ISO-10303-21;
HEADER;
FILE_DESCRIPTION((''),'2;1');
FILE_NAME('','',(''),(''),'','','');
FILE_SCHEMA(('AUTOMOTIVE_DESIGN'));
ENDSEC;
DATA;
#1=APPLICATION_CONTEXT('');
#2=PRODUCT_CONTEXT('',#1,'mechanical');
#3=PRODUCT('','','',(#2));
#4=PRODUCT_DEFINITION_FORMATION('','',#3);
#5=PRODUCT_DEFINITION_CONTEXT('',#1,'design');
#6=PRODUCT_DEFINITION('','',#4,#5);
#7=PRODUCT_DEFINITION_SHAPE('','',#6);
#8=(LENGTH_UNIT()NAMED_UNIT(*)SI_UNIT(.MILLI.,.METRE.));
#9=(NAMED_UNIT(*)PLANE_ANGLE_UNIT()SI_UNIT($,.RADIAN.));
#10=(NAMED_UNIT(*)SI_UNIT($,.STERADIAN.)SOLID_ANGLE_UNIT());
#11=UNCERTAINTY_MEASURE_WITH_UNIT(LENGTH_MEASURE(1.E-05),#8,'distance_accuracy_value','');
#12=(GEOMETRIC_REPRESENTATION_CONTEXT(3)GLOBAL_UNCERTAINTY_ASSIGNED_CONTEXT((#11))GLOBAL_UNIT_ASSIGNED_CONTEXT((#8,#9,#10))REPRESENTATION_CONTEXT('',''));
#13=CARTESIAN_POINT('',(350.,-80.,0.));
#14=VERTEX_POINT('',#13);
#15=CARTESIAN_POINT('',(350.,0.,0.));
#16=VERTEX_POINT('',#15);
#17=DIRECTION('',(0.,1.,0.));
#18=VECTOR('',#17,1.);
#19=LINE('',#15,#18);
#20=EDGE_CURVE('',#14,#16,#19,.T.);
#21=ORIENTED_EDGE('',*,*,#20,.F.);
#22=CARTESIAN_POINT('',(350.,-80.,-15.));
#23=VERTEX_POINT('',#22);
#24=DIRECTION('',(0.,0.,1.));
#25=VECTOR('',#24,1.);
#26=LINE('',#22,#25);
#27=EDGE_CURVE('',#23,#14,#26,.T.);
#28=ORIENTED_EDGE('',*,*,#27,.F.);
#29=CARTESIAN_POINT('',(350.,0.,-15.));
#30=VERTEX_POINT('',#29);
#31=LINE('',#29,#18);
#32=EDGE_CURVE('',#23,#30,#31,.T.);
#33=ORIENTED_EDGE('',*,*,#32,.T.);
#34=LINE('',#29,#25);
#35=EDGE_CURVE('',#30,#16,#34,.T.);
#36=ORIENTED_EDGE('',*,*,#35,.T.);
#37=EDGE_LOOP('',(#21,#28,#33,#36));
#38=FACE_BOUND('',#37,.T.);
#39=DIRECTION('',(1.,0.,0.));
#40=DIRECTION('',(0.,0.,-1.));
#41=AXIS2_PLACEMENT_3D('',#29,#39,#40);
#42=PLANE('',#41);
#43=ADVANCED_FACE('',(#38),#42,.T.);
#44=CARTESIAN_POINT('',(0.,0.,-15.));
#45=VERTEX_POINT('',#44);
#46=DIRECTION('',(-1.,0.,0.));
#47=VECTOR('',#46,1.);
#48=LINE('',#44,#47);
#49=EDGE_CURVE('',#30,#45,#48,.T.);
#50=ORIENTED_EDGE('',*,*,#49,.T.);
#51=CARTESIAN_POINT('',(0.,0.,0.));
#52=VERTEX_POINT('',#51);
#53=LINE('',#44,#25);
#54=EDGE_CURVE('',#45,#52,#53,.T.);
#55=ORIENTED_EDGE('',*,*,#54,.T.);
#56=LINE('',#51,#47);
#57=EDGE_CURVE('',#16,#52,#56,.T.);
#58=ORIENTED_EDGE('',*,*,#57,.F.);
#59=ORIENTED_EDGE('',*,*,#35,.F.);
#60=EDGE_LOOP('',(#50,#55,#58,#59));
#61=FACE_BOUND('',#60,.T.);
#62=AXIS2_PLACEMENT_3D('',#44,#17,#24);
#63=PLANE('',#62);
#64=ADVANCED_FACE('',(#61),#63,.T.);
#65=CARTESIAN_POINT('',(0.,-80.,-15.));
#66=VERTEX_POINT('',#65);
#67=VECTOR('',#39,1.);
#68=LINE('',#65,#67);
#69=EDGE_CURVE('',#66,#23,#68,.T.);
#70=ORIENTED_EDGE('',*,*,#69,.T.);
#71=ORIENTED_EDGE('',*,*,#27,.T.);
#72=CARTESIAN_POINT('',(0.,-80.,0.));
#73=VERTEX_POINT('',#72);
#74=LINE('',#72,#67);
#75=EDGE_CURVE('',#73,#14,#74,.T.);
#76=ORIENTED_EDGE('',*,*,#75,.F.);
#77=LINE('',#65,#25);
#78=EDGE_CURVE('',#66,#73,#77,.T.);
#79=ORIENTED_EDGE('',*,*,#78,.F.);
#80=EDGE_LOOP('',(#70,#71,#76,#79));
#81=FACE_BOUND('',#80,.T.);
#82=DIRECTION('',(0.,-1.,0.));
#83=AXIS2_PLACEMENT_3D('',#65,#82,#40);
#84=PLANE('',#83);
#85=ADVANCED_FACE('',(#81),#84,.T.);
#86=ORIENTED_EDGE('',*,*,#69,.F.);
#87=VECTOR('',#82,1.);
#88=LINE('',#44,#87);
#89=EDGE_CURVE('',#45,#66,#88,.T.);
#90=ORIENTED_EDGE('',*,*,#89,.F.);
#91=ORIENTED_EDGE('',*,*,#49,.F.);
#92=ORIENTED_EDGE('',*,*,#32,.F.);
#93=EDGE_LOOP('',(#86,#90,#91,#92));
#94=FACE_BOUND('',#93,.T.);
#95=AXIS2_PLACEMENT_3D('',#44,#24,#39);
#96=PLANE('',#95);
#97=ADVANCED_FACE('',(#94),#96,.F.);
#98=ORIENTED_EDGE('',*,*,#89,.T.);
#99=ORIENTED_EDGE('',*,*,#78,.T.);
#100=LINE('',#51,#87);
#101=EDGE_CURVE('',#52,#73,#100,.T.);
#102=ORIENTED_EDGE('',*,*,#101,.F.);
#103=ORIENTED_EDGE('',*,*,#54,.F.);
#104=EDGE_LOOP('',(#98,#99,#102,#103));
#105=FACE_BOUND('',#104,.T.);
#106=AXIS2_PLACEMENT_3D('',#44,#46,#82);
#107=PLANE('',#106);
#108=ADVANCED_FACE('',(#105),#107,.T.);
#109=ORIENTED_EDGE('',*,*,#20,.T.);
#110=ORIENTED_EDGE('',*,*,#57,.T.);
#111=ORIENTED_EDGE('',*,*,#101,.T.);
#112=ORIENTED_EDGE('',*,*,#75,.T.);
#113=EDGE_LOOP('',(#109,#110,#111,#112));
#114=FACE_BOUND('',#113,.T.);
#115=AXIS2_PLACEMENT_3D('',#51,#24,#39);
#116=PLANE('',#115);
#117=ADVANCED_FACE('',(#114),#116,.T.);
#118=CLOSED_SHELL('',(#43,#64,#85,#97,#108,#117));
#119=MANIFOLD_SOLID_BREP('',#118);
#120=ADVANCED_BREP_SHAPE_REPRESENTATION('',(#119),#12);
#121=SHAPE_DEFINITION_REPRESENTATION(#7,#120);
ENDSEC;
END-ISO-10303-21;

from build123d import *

# Parameters (mm, degrees)
IZIM1_W            = 350
IZIM1_H            = 80
TABAN_FLAN_1_DEPTH = 15


# Sheet-metal steps are written as plain solids
with BuildPart() as part:
    # Çizim1 → Taban-Flanş1 (new body)
    with BuildSketch(Plane.XY):
        with Locations((175, -40)):
            Rectangle(IZIM1_W, IZIM1_H)
    extrude(amount=-TABAN_FLAN_1_DEPTH)


solid = part.part
